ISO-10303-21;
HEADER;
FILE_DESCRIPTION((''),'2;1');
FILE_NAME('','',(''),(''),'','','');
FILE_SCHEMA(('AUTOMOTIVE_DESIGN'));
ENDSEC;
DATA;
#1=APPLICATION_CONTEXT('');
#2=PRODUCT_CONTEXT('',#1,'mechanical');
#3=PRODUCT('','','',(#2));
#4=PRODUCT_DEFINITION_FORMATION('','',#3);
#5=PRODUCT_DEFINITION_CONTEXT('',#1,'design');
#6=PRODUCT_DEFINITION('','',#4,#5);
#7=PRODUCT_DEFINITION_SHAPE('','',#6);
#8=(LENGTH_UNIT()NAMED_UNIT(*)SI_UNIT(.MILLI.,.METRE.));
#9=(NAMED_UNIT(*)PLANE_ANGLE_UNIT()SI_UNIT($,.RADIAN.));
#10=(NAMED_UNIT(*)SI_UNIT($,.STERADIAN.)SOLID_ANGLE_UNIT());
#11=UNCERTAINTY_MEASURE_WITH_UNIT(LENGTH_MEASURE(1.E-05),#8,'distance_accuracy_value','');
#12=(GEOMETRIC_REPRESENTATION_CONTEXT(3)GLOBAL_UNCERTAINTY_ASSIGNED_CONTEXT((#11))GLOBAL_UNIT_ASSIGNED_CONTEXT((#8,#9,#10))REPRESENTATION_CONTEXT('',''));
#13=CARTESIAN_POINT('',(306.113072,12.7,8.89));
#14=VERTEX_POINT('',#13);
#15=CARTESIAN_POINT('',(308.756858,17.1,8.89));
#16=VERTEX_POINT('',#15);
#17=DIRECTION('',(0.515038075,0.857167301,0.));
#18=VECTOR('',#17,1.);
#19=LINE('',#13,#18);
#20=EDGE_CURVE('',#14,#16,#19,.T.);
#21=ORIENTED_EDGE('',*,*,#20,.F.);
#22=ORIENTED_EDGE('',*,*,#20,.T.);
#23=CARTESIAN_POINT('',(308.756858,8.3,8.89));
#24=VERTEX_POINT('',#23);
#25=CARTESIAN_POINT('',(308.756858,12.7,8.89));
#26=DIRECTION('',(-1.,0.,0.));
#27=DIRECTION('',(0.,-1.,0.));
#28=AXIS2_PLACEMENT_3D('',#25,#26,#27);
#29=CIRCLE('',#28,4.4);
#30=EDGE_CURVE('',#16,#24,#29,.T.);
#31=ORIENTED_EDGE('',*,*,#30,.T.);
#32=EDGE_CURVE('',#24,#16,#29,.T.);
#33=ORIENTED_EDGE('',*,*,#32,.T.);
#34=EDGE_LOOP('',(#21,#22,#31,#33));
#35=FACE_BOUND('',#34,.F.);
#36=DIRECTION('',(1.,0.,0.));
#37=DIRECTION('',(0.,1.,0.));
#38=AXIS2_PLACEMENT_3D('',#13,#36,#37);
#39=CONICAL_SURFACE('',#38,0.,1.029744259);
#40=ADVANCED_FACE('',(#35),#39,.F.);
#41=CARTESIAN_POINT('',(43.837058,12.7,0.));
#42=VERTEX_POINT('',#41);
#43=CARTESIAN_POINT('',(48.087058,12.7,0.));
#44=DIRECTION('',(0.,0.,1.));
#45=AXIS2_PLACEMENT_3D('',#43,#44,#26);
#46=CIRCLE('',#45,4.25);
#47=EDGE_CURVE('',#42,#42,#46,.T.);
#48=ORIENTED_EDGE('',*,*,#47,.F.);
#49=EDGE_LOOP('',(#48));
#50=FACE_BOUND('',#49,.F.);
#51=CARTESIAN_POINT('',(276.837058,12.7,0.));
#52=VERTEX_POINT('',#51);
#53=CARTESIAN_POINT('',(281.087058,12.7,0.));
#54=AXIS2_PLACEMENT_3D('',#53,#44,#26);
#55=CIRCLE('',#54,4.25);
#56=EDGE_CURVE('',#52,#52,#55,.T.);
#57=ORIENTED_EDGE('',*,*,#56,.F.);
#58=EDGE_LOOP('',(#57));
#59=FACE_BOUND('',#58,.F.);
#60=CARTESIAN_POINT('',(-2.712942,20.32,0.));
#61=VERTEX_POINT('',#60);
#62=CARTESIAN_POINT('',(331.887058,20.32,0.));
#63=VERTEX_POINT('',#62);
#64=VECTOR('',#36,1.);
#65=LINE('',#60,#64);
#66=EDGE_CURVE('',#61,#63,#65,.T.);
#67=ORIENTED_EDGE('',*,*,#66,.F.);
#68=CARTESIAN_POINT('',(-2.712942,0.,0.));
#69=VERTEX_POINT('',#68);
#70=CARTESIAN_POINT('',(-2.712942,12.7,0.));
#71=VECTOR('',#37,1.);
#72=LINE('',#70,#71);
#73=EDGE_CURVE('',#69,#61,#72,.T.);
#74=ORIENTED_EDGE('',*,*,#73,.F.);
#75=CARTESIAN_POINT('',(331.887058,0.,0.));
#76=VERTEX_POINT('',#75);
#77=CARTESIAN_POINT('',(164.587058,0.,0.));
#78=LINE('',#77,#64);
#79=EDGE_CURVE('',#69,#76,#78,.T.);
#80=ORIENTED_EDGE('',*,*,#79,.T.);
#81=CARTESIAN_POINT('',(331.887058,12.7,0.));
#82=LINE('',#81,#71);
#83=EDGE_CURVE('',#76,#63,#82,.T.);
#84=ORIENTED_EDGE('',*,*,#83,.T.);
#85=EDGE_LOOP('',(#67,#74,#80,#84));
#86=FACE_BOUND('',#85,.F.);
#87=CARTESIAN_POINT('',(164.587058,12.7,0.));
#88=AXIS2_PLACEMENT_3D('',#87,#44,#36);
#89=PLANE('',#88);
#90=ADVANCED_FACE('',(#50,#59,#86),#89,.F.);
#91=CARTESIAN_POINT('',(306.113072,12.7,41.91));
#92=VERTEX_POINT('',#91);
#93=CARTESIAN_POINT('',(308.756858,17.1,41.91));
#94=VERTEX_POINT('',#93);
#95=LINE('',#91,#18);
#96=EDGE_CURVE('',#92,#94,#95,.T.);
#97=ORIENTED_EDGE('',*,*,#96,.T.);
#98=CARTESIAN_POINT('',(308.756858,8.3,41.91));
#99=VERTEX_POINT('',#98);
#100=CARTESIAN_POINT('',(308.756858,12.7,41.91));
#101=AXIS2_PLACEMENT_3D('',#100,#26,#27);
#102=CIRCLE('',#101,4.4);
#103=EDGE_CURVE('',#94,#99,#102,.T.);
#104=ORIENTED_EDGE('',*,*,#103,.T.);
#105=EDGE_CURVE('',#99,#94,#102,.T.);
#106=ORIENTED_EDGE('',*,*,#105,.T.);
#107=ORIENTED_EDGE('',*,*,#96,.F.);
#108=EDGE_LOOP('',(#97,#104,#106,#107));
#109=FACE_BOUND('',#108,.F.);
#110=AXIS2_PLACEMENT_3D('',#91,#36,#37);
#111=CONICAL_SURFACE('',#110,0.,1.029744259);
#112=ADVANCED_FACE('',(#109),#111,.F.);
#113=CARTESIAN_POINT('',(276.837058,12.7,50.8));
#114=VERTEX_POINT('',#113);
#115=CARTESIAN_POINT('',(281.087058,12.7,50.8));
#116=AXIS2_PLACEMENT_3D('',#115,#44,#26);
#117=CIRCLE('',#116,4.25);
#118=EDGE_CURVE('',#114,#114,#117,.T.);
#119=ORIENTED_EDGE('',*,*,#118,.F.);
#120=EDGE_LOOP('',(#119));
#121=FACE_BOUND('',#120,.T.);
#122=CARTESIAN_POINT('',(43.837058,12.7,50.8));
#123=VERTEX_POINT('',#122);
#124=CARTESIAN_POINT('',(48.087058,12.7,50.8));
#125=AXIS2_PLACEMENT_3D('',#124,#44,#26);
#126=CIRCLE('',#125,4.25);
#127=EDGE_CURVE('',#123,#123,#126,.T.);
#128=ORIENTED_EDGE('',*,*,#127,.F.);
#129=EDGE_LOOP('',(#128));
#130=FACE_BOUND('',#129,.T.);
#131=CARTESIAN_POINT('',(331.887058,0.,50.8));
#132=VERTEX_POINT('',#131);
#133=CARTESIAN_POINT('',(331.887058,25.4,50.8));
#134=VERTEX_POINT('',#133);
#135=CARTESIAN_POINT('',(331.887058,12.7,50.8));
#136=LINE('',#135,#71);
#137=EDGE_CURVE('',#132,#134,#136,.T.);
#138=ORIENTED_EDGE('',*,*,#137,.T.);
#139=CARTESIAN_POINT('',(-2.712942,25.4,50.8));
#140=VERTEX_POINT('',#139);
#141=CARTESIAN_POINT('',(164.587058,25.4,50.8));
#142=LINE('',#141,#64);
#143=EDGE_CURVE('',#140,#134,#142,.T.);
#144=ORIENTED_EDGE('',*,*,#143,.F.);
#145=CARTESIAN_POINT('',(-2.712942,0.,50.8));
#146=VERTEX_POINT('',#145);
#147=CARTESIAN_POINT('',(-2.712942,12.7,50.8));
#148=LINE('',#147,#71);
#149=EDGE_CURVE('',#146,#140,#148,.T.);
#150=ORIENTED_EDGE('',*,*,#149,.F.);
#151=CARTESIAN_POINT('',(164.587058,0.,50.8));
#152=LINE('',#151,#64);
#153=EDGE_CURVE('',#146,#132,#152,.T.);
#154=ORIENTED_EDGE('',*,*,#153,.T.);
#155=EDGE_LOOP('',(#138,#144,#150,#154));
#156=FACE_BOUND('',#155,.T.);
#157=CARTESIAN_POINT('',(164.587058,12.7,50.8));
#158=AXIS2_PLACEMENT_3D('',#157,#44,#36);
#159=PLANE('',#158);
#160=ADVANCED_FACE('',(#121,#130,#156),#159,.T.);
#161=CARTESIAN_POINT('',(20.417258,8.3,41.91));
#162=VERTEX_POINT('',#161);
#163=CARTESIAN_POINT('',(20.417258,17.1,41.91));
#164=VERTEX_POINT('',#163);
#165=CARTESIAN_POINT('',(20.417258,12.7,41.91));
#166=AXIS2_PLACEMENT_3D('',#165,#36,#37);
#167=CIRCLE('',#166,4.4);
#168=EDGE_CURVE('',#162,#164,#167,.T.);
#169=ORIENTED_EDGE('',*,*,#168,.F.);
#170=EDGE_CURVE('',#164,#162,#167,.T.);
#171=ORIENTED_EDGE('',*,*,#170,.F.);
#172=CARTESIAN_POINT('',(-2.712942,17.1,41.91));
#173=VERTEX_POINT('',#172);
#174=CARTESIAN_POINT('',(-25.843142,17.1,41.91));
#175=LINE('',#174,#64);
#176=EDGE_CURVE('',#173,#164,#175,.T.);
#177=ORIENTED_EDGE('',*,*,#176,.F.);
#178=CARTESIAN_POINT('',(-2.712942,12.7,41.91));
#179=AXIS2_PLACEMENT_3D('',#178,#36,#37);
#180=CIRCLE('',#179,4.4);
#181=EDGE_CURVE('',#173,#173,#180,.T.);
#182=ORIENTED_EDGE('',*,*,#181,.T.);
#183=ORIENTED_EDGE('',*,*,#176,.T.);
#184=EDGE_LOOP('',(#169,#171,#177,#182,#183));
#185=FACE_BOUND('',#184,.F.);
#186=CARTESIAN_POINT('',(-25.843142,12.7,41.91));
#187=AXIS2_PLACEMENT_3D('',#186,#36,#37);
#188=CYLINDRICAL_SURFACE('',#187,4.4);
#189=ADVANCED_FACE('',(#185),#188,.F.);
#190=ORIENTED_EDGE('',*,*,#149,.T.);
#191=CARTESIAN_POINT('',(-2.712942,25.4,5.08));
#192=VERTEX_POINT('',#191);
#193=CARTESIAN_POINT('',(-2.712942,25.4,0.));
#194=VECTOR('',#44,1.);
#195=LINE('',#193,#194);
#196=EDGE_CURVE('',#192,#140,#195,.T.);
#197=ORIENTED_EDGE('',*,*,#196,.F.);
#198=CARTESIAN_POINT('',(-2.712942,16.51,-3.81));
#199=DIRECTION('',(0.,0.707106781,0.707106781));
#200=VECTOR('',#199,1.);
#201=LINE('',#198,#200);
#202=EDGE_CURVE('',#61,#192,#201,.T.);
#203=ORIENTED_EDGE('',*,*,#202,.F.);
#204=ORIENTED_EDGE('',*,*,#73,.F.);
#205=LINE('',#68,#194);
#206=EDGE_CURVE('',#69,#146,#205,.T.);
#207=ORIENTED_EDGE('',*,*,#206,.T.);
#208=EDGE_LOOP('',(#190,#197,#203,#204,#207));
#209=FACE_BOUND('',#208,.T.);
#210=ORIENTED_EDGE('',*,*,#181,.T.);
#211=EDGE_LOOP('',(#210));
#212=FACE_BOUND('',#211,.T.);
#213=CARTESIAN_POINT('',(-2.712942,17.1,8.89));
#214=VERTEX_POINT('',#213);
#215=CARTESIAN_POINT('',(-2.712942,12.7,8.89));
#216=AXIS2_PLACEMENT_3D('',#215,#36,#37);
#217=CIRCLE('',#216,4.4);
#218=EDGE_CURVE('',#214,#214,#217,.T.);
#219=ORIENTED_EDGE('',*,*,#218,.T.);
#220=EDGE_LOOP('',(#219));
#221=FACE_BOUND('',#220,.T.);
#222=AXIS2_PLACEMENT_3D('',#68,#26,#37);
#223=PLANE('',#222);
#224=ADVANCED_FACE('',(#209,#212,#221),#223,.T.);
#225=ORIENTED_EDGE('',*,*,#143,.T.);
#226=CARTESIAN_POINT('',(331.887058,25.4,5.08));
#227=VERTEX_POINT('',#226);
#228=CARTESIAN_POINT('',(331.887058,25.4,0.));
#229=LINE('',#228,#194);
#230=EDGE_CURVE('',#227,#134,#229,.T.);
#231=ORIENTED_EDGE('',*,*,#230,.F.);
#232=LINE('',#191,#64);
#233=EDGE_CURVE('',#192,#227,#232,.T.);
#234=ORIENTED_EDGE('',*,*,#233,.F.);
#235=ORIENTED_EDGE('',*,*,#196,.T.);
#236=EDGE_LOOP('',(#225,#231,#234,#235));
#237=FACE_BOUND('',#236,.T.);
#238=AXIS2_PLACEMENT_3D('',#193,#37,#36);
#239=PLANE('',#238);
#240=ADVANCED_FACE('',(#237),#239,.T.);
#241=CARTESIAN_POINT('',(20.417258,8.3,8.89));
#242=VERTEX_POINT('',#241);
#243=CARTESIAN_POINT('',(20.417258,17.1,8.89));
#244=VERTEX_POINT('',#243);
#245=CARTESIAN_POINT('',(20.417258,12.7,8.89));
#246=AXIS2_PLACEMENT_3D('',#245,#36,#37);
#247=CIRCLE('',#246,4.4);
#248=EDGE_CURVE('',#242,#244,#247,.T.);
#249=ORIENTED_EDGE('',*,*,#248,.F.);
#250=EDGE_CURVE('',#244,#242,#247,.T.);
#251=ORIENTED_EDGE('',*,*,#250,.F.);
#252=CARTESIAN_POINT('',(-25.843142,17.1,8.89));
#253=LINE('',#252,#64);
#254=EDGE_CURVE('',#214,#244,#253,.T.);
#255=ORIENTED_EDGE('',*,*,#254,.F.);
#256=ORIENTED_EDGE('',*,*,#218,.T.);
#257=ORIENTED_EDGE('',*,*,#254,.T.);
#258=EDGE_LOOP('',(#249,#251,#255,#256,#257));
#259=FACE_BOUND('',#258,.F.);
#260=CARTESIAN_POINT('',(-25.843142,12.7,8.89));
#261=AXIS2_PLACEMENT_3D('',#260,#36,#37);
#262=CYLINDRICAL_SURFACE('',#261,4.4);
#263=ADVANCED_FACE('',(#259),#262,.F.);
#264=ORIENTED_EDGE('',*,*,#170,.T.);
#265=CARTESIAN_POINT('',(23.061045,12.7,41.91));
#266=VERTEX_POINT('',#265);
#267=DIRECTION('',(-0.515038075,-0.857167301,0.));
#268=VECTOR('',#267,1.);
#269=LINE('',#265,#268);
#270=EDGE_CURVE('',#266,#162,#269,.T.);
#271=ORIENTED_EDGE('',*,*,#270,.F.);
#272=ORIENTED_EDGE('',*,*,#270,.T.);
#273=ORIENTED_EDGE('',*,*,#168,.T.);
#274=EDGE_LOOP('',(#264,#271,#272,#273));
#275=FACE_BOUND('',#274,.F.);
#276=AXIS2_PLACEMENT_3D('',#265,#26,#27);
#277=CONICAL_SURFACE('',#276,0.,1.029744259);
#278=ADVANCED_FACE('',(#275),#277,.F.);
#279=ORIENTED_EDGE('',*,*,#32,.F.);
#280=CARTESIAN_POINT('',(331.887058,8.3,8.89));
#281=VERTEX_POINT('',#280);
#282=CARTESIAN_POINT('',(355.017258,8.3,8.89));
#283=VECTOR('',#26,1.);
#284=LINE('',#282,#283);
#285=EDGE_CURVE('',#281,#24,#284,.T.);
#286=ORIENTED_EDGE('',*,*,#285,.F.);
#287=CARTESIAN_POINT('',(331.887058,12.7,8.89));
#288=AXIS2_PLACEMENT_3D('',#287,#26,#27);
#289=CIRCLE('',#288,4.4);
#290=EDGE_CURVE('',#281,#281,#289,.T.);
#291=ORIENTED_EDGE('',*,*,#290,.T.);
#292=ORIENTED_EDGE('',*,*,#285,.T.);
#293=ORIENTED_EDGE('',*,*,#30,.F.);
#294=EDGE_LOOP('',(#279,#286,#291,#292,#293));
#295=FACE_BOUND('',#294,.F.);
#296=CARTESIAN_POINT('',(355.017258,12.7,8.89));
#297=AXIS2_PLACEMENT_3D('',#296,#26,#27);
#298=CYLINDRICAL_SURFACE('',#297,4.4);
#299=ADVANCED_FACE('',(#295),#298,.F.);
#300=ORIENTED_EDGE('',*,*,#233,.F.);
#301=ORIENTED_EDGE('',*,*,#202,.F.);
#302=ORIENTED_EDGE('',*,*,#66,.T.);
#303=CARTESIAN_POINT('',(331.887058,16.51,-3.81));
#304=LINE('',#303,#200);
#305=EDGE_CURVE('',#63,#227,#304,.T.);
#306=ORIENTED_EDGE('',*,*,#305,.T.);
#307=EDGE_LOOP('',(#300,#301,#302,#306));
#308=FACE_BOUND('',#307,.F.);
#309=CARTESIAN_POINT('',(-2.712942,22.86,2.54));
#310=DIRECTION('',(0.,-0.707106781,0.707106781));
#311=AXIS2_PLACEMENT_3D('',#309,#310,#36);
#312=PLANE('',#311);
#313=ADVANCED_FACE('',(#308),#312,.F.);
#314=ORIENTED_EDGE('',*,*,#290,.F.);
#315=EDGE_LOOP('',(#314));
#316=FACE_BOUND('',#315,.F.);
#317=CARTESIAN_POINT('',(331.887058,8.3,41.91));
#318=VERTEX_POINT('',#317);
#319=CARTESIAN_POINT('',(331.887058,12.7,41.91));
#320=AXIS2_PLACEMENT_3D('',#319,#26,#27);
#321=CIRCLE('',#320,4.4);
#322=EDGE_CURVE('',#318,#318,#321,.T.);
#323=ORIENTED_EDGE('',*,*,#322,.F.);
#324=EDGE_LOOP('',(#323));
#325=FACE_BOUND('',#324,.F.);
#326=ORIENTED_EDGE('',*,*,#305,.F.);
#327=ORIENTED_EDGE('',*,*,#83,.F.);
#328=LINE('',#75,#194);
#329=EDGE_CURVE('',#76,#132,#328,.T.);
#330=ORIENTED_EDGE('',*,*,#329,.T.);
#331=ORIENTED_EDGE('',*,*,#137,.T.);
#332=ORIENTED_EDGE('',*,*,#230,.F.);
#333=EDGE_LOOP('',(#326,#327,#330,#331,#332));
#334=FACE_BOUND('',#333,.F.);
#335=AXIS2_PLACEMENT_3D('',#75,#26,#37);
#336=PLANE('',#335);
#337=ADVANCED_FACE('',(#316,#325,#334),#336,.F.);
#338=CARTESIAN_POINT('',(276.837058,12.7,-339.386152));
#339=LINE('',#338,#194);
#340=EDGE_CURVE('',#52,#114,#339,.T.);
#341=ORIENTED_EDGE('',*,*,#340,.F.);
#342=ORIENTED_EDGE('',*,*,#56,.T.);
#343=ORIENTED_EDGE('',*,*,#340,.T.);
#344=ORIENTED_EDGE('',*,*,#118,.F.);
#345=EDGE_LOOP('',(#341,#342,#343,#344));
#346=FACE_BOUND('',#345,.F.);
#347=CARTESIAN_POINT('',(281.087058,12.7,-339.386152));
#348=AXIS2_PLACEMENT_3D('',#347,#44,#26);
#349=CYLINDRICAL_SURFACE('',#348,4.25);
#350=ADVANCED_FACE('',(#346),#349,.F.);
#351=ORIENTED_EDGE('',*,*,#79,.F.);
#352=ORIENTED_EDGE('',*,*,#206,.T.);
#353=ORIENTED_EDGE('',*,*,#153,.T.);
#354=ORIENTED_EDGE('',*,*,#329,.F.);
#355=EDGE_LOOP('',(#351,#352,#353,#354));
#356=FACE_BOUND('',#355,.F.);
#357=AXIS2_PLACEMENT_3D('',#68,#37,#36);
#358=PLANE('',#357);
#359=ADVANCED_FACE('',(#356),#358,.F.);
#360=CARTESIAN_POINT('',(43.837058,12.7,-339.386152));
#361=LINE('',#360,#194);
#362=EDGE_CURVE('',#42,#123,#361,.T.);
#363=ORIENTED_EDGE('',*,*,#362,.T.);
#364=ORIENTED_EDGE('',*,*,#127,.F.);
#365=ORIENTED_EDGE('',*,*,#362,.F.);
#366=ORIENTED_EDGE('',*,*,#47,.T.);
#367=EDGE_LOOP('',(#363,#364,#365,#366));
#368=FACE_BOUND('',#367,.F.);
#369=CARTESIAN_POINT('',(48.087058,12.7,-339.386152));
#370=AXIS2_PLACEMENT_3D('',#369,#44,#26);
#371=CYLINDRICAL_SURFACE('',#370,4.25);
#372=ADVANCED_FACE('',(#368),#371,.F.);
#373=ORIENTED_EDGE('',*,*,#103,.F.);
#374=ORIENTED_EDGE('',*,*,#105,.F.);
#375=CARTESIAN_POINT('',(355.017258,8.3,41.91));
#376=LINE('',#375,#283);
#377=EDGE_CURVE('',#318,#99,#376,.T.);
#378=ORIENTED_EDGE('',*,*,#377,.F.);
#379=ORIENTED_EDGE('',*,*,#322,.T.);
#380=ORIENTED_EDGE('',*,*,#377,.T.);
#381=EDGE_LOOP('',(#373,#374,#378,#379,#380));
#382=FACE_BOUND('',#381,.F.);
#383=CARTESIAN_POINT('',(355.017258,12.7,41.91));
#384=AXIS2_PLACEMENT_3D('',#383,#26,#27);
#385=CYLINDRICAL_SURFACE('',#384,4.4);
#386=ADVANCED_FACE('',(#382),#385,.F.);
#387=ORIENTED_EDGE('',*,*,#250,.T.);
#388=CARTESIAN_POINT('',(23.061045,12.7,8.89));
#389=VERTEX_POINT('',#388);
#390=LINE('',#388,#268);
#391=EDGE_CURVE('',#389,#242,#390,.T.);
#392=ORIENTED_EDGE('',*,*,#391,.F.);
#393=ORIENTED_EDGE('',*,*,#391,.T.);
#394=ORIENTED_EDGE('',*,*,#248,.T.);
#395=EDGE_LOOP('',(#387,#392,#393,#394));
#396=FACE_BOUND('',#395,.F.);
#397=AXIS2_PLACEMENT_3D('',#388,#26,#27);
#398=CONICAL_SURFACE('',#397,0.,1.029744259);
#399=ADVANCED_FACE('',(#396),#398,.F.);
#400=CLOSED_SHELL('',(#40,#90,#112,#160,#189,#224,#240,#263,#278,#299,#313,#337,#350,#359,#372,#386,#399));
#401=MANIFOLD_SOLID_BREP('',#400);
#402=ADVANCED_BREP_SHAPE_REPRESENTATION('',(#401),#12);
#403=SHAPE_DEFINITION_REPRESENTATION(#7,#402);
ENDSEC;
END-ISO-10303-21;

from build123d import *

# Parameters (mm, degrees)
F0_W           = 334.6
F0_H           = 25.4
F1_DEPTH       = 50.8
F4_D           = 8.8
F4_DEPTH       = 23.1302
F4_TIP         = 2.6437867237
F4_ON_F2_D     = 8.8
F4_ON_F2_DEPTH = 23.1302
F4_ON_F2_TIP   = 2.6437867237
F5_SIZE        = 5.08
F7_D           = 8.5


# Not quite as in the source:
# - a feature names something its author has since deleted; it is built from what else it names


with BuildPart() as f1:
    # F0 (on Top) → F1 (new body)
    with BuildSketch(Plane.XY):
        with Locations((164.5870582715, 12.7)):
            Rectangle(F0_W, F0_H)
    extrude(amount=F1_DEPTH)

    # F4
    with Locations(Plane(origin=(-2.7129417285, 0, 0), x_dir=(0, -1, 0), z_dir=(-1, 0, 0))):
        with Locations((-12.7, 41.91), (-12.7, 8.89)):
            Hole(F4_D / 2, depth=F4_DEPTH)
            with Locations((0, 0, -(F4_DEPTH + F4_TIP / 2))):  # 118° drill point
                Cone(0, F4_D / 2, F4_TIP, mode=Mode.SUBTRACT)

    # F4 on F2
    with Locations(Plane.YZ.offset(331.8870582715)):
        with Locations((12.7, 41.91), (12.7, 8.89)):
            Hole(F4_ON_F2_D / 2, depth=F4_ON_F2_DEPTH)
            with Locations((0, 0, -(F4_ON_F2_DEPTH + F4_ON_F2_TIP / 2))):  # 118° drill point
                Cone(0, F4_ON_F2_D / 2, F4_ON_F2_TIP, mode=Mode.SUBTRACT)

    # F5
    f5_edges = [f1.edges().sort_by_distance(p)[0] for p in [
        (164.587058, 25.4, 0),
    ]]
    chamfer(f5_edges, length=F5_SIZE)

    # F7 (through all)
    with Locations(Plane(origin=(0, 0, 0), x_dir=(1, 0, 0), z_dir=(0, 0, -1))):
        with Locations((48.0870582715, -12.7), (281.0870582715, -12.7)):
            Hole(F7_D / 2)


solid = f1.part
